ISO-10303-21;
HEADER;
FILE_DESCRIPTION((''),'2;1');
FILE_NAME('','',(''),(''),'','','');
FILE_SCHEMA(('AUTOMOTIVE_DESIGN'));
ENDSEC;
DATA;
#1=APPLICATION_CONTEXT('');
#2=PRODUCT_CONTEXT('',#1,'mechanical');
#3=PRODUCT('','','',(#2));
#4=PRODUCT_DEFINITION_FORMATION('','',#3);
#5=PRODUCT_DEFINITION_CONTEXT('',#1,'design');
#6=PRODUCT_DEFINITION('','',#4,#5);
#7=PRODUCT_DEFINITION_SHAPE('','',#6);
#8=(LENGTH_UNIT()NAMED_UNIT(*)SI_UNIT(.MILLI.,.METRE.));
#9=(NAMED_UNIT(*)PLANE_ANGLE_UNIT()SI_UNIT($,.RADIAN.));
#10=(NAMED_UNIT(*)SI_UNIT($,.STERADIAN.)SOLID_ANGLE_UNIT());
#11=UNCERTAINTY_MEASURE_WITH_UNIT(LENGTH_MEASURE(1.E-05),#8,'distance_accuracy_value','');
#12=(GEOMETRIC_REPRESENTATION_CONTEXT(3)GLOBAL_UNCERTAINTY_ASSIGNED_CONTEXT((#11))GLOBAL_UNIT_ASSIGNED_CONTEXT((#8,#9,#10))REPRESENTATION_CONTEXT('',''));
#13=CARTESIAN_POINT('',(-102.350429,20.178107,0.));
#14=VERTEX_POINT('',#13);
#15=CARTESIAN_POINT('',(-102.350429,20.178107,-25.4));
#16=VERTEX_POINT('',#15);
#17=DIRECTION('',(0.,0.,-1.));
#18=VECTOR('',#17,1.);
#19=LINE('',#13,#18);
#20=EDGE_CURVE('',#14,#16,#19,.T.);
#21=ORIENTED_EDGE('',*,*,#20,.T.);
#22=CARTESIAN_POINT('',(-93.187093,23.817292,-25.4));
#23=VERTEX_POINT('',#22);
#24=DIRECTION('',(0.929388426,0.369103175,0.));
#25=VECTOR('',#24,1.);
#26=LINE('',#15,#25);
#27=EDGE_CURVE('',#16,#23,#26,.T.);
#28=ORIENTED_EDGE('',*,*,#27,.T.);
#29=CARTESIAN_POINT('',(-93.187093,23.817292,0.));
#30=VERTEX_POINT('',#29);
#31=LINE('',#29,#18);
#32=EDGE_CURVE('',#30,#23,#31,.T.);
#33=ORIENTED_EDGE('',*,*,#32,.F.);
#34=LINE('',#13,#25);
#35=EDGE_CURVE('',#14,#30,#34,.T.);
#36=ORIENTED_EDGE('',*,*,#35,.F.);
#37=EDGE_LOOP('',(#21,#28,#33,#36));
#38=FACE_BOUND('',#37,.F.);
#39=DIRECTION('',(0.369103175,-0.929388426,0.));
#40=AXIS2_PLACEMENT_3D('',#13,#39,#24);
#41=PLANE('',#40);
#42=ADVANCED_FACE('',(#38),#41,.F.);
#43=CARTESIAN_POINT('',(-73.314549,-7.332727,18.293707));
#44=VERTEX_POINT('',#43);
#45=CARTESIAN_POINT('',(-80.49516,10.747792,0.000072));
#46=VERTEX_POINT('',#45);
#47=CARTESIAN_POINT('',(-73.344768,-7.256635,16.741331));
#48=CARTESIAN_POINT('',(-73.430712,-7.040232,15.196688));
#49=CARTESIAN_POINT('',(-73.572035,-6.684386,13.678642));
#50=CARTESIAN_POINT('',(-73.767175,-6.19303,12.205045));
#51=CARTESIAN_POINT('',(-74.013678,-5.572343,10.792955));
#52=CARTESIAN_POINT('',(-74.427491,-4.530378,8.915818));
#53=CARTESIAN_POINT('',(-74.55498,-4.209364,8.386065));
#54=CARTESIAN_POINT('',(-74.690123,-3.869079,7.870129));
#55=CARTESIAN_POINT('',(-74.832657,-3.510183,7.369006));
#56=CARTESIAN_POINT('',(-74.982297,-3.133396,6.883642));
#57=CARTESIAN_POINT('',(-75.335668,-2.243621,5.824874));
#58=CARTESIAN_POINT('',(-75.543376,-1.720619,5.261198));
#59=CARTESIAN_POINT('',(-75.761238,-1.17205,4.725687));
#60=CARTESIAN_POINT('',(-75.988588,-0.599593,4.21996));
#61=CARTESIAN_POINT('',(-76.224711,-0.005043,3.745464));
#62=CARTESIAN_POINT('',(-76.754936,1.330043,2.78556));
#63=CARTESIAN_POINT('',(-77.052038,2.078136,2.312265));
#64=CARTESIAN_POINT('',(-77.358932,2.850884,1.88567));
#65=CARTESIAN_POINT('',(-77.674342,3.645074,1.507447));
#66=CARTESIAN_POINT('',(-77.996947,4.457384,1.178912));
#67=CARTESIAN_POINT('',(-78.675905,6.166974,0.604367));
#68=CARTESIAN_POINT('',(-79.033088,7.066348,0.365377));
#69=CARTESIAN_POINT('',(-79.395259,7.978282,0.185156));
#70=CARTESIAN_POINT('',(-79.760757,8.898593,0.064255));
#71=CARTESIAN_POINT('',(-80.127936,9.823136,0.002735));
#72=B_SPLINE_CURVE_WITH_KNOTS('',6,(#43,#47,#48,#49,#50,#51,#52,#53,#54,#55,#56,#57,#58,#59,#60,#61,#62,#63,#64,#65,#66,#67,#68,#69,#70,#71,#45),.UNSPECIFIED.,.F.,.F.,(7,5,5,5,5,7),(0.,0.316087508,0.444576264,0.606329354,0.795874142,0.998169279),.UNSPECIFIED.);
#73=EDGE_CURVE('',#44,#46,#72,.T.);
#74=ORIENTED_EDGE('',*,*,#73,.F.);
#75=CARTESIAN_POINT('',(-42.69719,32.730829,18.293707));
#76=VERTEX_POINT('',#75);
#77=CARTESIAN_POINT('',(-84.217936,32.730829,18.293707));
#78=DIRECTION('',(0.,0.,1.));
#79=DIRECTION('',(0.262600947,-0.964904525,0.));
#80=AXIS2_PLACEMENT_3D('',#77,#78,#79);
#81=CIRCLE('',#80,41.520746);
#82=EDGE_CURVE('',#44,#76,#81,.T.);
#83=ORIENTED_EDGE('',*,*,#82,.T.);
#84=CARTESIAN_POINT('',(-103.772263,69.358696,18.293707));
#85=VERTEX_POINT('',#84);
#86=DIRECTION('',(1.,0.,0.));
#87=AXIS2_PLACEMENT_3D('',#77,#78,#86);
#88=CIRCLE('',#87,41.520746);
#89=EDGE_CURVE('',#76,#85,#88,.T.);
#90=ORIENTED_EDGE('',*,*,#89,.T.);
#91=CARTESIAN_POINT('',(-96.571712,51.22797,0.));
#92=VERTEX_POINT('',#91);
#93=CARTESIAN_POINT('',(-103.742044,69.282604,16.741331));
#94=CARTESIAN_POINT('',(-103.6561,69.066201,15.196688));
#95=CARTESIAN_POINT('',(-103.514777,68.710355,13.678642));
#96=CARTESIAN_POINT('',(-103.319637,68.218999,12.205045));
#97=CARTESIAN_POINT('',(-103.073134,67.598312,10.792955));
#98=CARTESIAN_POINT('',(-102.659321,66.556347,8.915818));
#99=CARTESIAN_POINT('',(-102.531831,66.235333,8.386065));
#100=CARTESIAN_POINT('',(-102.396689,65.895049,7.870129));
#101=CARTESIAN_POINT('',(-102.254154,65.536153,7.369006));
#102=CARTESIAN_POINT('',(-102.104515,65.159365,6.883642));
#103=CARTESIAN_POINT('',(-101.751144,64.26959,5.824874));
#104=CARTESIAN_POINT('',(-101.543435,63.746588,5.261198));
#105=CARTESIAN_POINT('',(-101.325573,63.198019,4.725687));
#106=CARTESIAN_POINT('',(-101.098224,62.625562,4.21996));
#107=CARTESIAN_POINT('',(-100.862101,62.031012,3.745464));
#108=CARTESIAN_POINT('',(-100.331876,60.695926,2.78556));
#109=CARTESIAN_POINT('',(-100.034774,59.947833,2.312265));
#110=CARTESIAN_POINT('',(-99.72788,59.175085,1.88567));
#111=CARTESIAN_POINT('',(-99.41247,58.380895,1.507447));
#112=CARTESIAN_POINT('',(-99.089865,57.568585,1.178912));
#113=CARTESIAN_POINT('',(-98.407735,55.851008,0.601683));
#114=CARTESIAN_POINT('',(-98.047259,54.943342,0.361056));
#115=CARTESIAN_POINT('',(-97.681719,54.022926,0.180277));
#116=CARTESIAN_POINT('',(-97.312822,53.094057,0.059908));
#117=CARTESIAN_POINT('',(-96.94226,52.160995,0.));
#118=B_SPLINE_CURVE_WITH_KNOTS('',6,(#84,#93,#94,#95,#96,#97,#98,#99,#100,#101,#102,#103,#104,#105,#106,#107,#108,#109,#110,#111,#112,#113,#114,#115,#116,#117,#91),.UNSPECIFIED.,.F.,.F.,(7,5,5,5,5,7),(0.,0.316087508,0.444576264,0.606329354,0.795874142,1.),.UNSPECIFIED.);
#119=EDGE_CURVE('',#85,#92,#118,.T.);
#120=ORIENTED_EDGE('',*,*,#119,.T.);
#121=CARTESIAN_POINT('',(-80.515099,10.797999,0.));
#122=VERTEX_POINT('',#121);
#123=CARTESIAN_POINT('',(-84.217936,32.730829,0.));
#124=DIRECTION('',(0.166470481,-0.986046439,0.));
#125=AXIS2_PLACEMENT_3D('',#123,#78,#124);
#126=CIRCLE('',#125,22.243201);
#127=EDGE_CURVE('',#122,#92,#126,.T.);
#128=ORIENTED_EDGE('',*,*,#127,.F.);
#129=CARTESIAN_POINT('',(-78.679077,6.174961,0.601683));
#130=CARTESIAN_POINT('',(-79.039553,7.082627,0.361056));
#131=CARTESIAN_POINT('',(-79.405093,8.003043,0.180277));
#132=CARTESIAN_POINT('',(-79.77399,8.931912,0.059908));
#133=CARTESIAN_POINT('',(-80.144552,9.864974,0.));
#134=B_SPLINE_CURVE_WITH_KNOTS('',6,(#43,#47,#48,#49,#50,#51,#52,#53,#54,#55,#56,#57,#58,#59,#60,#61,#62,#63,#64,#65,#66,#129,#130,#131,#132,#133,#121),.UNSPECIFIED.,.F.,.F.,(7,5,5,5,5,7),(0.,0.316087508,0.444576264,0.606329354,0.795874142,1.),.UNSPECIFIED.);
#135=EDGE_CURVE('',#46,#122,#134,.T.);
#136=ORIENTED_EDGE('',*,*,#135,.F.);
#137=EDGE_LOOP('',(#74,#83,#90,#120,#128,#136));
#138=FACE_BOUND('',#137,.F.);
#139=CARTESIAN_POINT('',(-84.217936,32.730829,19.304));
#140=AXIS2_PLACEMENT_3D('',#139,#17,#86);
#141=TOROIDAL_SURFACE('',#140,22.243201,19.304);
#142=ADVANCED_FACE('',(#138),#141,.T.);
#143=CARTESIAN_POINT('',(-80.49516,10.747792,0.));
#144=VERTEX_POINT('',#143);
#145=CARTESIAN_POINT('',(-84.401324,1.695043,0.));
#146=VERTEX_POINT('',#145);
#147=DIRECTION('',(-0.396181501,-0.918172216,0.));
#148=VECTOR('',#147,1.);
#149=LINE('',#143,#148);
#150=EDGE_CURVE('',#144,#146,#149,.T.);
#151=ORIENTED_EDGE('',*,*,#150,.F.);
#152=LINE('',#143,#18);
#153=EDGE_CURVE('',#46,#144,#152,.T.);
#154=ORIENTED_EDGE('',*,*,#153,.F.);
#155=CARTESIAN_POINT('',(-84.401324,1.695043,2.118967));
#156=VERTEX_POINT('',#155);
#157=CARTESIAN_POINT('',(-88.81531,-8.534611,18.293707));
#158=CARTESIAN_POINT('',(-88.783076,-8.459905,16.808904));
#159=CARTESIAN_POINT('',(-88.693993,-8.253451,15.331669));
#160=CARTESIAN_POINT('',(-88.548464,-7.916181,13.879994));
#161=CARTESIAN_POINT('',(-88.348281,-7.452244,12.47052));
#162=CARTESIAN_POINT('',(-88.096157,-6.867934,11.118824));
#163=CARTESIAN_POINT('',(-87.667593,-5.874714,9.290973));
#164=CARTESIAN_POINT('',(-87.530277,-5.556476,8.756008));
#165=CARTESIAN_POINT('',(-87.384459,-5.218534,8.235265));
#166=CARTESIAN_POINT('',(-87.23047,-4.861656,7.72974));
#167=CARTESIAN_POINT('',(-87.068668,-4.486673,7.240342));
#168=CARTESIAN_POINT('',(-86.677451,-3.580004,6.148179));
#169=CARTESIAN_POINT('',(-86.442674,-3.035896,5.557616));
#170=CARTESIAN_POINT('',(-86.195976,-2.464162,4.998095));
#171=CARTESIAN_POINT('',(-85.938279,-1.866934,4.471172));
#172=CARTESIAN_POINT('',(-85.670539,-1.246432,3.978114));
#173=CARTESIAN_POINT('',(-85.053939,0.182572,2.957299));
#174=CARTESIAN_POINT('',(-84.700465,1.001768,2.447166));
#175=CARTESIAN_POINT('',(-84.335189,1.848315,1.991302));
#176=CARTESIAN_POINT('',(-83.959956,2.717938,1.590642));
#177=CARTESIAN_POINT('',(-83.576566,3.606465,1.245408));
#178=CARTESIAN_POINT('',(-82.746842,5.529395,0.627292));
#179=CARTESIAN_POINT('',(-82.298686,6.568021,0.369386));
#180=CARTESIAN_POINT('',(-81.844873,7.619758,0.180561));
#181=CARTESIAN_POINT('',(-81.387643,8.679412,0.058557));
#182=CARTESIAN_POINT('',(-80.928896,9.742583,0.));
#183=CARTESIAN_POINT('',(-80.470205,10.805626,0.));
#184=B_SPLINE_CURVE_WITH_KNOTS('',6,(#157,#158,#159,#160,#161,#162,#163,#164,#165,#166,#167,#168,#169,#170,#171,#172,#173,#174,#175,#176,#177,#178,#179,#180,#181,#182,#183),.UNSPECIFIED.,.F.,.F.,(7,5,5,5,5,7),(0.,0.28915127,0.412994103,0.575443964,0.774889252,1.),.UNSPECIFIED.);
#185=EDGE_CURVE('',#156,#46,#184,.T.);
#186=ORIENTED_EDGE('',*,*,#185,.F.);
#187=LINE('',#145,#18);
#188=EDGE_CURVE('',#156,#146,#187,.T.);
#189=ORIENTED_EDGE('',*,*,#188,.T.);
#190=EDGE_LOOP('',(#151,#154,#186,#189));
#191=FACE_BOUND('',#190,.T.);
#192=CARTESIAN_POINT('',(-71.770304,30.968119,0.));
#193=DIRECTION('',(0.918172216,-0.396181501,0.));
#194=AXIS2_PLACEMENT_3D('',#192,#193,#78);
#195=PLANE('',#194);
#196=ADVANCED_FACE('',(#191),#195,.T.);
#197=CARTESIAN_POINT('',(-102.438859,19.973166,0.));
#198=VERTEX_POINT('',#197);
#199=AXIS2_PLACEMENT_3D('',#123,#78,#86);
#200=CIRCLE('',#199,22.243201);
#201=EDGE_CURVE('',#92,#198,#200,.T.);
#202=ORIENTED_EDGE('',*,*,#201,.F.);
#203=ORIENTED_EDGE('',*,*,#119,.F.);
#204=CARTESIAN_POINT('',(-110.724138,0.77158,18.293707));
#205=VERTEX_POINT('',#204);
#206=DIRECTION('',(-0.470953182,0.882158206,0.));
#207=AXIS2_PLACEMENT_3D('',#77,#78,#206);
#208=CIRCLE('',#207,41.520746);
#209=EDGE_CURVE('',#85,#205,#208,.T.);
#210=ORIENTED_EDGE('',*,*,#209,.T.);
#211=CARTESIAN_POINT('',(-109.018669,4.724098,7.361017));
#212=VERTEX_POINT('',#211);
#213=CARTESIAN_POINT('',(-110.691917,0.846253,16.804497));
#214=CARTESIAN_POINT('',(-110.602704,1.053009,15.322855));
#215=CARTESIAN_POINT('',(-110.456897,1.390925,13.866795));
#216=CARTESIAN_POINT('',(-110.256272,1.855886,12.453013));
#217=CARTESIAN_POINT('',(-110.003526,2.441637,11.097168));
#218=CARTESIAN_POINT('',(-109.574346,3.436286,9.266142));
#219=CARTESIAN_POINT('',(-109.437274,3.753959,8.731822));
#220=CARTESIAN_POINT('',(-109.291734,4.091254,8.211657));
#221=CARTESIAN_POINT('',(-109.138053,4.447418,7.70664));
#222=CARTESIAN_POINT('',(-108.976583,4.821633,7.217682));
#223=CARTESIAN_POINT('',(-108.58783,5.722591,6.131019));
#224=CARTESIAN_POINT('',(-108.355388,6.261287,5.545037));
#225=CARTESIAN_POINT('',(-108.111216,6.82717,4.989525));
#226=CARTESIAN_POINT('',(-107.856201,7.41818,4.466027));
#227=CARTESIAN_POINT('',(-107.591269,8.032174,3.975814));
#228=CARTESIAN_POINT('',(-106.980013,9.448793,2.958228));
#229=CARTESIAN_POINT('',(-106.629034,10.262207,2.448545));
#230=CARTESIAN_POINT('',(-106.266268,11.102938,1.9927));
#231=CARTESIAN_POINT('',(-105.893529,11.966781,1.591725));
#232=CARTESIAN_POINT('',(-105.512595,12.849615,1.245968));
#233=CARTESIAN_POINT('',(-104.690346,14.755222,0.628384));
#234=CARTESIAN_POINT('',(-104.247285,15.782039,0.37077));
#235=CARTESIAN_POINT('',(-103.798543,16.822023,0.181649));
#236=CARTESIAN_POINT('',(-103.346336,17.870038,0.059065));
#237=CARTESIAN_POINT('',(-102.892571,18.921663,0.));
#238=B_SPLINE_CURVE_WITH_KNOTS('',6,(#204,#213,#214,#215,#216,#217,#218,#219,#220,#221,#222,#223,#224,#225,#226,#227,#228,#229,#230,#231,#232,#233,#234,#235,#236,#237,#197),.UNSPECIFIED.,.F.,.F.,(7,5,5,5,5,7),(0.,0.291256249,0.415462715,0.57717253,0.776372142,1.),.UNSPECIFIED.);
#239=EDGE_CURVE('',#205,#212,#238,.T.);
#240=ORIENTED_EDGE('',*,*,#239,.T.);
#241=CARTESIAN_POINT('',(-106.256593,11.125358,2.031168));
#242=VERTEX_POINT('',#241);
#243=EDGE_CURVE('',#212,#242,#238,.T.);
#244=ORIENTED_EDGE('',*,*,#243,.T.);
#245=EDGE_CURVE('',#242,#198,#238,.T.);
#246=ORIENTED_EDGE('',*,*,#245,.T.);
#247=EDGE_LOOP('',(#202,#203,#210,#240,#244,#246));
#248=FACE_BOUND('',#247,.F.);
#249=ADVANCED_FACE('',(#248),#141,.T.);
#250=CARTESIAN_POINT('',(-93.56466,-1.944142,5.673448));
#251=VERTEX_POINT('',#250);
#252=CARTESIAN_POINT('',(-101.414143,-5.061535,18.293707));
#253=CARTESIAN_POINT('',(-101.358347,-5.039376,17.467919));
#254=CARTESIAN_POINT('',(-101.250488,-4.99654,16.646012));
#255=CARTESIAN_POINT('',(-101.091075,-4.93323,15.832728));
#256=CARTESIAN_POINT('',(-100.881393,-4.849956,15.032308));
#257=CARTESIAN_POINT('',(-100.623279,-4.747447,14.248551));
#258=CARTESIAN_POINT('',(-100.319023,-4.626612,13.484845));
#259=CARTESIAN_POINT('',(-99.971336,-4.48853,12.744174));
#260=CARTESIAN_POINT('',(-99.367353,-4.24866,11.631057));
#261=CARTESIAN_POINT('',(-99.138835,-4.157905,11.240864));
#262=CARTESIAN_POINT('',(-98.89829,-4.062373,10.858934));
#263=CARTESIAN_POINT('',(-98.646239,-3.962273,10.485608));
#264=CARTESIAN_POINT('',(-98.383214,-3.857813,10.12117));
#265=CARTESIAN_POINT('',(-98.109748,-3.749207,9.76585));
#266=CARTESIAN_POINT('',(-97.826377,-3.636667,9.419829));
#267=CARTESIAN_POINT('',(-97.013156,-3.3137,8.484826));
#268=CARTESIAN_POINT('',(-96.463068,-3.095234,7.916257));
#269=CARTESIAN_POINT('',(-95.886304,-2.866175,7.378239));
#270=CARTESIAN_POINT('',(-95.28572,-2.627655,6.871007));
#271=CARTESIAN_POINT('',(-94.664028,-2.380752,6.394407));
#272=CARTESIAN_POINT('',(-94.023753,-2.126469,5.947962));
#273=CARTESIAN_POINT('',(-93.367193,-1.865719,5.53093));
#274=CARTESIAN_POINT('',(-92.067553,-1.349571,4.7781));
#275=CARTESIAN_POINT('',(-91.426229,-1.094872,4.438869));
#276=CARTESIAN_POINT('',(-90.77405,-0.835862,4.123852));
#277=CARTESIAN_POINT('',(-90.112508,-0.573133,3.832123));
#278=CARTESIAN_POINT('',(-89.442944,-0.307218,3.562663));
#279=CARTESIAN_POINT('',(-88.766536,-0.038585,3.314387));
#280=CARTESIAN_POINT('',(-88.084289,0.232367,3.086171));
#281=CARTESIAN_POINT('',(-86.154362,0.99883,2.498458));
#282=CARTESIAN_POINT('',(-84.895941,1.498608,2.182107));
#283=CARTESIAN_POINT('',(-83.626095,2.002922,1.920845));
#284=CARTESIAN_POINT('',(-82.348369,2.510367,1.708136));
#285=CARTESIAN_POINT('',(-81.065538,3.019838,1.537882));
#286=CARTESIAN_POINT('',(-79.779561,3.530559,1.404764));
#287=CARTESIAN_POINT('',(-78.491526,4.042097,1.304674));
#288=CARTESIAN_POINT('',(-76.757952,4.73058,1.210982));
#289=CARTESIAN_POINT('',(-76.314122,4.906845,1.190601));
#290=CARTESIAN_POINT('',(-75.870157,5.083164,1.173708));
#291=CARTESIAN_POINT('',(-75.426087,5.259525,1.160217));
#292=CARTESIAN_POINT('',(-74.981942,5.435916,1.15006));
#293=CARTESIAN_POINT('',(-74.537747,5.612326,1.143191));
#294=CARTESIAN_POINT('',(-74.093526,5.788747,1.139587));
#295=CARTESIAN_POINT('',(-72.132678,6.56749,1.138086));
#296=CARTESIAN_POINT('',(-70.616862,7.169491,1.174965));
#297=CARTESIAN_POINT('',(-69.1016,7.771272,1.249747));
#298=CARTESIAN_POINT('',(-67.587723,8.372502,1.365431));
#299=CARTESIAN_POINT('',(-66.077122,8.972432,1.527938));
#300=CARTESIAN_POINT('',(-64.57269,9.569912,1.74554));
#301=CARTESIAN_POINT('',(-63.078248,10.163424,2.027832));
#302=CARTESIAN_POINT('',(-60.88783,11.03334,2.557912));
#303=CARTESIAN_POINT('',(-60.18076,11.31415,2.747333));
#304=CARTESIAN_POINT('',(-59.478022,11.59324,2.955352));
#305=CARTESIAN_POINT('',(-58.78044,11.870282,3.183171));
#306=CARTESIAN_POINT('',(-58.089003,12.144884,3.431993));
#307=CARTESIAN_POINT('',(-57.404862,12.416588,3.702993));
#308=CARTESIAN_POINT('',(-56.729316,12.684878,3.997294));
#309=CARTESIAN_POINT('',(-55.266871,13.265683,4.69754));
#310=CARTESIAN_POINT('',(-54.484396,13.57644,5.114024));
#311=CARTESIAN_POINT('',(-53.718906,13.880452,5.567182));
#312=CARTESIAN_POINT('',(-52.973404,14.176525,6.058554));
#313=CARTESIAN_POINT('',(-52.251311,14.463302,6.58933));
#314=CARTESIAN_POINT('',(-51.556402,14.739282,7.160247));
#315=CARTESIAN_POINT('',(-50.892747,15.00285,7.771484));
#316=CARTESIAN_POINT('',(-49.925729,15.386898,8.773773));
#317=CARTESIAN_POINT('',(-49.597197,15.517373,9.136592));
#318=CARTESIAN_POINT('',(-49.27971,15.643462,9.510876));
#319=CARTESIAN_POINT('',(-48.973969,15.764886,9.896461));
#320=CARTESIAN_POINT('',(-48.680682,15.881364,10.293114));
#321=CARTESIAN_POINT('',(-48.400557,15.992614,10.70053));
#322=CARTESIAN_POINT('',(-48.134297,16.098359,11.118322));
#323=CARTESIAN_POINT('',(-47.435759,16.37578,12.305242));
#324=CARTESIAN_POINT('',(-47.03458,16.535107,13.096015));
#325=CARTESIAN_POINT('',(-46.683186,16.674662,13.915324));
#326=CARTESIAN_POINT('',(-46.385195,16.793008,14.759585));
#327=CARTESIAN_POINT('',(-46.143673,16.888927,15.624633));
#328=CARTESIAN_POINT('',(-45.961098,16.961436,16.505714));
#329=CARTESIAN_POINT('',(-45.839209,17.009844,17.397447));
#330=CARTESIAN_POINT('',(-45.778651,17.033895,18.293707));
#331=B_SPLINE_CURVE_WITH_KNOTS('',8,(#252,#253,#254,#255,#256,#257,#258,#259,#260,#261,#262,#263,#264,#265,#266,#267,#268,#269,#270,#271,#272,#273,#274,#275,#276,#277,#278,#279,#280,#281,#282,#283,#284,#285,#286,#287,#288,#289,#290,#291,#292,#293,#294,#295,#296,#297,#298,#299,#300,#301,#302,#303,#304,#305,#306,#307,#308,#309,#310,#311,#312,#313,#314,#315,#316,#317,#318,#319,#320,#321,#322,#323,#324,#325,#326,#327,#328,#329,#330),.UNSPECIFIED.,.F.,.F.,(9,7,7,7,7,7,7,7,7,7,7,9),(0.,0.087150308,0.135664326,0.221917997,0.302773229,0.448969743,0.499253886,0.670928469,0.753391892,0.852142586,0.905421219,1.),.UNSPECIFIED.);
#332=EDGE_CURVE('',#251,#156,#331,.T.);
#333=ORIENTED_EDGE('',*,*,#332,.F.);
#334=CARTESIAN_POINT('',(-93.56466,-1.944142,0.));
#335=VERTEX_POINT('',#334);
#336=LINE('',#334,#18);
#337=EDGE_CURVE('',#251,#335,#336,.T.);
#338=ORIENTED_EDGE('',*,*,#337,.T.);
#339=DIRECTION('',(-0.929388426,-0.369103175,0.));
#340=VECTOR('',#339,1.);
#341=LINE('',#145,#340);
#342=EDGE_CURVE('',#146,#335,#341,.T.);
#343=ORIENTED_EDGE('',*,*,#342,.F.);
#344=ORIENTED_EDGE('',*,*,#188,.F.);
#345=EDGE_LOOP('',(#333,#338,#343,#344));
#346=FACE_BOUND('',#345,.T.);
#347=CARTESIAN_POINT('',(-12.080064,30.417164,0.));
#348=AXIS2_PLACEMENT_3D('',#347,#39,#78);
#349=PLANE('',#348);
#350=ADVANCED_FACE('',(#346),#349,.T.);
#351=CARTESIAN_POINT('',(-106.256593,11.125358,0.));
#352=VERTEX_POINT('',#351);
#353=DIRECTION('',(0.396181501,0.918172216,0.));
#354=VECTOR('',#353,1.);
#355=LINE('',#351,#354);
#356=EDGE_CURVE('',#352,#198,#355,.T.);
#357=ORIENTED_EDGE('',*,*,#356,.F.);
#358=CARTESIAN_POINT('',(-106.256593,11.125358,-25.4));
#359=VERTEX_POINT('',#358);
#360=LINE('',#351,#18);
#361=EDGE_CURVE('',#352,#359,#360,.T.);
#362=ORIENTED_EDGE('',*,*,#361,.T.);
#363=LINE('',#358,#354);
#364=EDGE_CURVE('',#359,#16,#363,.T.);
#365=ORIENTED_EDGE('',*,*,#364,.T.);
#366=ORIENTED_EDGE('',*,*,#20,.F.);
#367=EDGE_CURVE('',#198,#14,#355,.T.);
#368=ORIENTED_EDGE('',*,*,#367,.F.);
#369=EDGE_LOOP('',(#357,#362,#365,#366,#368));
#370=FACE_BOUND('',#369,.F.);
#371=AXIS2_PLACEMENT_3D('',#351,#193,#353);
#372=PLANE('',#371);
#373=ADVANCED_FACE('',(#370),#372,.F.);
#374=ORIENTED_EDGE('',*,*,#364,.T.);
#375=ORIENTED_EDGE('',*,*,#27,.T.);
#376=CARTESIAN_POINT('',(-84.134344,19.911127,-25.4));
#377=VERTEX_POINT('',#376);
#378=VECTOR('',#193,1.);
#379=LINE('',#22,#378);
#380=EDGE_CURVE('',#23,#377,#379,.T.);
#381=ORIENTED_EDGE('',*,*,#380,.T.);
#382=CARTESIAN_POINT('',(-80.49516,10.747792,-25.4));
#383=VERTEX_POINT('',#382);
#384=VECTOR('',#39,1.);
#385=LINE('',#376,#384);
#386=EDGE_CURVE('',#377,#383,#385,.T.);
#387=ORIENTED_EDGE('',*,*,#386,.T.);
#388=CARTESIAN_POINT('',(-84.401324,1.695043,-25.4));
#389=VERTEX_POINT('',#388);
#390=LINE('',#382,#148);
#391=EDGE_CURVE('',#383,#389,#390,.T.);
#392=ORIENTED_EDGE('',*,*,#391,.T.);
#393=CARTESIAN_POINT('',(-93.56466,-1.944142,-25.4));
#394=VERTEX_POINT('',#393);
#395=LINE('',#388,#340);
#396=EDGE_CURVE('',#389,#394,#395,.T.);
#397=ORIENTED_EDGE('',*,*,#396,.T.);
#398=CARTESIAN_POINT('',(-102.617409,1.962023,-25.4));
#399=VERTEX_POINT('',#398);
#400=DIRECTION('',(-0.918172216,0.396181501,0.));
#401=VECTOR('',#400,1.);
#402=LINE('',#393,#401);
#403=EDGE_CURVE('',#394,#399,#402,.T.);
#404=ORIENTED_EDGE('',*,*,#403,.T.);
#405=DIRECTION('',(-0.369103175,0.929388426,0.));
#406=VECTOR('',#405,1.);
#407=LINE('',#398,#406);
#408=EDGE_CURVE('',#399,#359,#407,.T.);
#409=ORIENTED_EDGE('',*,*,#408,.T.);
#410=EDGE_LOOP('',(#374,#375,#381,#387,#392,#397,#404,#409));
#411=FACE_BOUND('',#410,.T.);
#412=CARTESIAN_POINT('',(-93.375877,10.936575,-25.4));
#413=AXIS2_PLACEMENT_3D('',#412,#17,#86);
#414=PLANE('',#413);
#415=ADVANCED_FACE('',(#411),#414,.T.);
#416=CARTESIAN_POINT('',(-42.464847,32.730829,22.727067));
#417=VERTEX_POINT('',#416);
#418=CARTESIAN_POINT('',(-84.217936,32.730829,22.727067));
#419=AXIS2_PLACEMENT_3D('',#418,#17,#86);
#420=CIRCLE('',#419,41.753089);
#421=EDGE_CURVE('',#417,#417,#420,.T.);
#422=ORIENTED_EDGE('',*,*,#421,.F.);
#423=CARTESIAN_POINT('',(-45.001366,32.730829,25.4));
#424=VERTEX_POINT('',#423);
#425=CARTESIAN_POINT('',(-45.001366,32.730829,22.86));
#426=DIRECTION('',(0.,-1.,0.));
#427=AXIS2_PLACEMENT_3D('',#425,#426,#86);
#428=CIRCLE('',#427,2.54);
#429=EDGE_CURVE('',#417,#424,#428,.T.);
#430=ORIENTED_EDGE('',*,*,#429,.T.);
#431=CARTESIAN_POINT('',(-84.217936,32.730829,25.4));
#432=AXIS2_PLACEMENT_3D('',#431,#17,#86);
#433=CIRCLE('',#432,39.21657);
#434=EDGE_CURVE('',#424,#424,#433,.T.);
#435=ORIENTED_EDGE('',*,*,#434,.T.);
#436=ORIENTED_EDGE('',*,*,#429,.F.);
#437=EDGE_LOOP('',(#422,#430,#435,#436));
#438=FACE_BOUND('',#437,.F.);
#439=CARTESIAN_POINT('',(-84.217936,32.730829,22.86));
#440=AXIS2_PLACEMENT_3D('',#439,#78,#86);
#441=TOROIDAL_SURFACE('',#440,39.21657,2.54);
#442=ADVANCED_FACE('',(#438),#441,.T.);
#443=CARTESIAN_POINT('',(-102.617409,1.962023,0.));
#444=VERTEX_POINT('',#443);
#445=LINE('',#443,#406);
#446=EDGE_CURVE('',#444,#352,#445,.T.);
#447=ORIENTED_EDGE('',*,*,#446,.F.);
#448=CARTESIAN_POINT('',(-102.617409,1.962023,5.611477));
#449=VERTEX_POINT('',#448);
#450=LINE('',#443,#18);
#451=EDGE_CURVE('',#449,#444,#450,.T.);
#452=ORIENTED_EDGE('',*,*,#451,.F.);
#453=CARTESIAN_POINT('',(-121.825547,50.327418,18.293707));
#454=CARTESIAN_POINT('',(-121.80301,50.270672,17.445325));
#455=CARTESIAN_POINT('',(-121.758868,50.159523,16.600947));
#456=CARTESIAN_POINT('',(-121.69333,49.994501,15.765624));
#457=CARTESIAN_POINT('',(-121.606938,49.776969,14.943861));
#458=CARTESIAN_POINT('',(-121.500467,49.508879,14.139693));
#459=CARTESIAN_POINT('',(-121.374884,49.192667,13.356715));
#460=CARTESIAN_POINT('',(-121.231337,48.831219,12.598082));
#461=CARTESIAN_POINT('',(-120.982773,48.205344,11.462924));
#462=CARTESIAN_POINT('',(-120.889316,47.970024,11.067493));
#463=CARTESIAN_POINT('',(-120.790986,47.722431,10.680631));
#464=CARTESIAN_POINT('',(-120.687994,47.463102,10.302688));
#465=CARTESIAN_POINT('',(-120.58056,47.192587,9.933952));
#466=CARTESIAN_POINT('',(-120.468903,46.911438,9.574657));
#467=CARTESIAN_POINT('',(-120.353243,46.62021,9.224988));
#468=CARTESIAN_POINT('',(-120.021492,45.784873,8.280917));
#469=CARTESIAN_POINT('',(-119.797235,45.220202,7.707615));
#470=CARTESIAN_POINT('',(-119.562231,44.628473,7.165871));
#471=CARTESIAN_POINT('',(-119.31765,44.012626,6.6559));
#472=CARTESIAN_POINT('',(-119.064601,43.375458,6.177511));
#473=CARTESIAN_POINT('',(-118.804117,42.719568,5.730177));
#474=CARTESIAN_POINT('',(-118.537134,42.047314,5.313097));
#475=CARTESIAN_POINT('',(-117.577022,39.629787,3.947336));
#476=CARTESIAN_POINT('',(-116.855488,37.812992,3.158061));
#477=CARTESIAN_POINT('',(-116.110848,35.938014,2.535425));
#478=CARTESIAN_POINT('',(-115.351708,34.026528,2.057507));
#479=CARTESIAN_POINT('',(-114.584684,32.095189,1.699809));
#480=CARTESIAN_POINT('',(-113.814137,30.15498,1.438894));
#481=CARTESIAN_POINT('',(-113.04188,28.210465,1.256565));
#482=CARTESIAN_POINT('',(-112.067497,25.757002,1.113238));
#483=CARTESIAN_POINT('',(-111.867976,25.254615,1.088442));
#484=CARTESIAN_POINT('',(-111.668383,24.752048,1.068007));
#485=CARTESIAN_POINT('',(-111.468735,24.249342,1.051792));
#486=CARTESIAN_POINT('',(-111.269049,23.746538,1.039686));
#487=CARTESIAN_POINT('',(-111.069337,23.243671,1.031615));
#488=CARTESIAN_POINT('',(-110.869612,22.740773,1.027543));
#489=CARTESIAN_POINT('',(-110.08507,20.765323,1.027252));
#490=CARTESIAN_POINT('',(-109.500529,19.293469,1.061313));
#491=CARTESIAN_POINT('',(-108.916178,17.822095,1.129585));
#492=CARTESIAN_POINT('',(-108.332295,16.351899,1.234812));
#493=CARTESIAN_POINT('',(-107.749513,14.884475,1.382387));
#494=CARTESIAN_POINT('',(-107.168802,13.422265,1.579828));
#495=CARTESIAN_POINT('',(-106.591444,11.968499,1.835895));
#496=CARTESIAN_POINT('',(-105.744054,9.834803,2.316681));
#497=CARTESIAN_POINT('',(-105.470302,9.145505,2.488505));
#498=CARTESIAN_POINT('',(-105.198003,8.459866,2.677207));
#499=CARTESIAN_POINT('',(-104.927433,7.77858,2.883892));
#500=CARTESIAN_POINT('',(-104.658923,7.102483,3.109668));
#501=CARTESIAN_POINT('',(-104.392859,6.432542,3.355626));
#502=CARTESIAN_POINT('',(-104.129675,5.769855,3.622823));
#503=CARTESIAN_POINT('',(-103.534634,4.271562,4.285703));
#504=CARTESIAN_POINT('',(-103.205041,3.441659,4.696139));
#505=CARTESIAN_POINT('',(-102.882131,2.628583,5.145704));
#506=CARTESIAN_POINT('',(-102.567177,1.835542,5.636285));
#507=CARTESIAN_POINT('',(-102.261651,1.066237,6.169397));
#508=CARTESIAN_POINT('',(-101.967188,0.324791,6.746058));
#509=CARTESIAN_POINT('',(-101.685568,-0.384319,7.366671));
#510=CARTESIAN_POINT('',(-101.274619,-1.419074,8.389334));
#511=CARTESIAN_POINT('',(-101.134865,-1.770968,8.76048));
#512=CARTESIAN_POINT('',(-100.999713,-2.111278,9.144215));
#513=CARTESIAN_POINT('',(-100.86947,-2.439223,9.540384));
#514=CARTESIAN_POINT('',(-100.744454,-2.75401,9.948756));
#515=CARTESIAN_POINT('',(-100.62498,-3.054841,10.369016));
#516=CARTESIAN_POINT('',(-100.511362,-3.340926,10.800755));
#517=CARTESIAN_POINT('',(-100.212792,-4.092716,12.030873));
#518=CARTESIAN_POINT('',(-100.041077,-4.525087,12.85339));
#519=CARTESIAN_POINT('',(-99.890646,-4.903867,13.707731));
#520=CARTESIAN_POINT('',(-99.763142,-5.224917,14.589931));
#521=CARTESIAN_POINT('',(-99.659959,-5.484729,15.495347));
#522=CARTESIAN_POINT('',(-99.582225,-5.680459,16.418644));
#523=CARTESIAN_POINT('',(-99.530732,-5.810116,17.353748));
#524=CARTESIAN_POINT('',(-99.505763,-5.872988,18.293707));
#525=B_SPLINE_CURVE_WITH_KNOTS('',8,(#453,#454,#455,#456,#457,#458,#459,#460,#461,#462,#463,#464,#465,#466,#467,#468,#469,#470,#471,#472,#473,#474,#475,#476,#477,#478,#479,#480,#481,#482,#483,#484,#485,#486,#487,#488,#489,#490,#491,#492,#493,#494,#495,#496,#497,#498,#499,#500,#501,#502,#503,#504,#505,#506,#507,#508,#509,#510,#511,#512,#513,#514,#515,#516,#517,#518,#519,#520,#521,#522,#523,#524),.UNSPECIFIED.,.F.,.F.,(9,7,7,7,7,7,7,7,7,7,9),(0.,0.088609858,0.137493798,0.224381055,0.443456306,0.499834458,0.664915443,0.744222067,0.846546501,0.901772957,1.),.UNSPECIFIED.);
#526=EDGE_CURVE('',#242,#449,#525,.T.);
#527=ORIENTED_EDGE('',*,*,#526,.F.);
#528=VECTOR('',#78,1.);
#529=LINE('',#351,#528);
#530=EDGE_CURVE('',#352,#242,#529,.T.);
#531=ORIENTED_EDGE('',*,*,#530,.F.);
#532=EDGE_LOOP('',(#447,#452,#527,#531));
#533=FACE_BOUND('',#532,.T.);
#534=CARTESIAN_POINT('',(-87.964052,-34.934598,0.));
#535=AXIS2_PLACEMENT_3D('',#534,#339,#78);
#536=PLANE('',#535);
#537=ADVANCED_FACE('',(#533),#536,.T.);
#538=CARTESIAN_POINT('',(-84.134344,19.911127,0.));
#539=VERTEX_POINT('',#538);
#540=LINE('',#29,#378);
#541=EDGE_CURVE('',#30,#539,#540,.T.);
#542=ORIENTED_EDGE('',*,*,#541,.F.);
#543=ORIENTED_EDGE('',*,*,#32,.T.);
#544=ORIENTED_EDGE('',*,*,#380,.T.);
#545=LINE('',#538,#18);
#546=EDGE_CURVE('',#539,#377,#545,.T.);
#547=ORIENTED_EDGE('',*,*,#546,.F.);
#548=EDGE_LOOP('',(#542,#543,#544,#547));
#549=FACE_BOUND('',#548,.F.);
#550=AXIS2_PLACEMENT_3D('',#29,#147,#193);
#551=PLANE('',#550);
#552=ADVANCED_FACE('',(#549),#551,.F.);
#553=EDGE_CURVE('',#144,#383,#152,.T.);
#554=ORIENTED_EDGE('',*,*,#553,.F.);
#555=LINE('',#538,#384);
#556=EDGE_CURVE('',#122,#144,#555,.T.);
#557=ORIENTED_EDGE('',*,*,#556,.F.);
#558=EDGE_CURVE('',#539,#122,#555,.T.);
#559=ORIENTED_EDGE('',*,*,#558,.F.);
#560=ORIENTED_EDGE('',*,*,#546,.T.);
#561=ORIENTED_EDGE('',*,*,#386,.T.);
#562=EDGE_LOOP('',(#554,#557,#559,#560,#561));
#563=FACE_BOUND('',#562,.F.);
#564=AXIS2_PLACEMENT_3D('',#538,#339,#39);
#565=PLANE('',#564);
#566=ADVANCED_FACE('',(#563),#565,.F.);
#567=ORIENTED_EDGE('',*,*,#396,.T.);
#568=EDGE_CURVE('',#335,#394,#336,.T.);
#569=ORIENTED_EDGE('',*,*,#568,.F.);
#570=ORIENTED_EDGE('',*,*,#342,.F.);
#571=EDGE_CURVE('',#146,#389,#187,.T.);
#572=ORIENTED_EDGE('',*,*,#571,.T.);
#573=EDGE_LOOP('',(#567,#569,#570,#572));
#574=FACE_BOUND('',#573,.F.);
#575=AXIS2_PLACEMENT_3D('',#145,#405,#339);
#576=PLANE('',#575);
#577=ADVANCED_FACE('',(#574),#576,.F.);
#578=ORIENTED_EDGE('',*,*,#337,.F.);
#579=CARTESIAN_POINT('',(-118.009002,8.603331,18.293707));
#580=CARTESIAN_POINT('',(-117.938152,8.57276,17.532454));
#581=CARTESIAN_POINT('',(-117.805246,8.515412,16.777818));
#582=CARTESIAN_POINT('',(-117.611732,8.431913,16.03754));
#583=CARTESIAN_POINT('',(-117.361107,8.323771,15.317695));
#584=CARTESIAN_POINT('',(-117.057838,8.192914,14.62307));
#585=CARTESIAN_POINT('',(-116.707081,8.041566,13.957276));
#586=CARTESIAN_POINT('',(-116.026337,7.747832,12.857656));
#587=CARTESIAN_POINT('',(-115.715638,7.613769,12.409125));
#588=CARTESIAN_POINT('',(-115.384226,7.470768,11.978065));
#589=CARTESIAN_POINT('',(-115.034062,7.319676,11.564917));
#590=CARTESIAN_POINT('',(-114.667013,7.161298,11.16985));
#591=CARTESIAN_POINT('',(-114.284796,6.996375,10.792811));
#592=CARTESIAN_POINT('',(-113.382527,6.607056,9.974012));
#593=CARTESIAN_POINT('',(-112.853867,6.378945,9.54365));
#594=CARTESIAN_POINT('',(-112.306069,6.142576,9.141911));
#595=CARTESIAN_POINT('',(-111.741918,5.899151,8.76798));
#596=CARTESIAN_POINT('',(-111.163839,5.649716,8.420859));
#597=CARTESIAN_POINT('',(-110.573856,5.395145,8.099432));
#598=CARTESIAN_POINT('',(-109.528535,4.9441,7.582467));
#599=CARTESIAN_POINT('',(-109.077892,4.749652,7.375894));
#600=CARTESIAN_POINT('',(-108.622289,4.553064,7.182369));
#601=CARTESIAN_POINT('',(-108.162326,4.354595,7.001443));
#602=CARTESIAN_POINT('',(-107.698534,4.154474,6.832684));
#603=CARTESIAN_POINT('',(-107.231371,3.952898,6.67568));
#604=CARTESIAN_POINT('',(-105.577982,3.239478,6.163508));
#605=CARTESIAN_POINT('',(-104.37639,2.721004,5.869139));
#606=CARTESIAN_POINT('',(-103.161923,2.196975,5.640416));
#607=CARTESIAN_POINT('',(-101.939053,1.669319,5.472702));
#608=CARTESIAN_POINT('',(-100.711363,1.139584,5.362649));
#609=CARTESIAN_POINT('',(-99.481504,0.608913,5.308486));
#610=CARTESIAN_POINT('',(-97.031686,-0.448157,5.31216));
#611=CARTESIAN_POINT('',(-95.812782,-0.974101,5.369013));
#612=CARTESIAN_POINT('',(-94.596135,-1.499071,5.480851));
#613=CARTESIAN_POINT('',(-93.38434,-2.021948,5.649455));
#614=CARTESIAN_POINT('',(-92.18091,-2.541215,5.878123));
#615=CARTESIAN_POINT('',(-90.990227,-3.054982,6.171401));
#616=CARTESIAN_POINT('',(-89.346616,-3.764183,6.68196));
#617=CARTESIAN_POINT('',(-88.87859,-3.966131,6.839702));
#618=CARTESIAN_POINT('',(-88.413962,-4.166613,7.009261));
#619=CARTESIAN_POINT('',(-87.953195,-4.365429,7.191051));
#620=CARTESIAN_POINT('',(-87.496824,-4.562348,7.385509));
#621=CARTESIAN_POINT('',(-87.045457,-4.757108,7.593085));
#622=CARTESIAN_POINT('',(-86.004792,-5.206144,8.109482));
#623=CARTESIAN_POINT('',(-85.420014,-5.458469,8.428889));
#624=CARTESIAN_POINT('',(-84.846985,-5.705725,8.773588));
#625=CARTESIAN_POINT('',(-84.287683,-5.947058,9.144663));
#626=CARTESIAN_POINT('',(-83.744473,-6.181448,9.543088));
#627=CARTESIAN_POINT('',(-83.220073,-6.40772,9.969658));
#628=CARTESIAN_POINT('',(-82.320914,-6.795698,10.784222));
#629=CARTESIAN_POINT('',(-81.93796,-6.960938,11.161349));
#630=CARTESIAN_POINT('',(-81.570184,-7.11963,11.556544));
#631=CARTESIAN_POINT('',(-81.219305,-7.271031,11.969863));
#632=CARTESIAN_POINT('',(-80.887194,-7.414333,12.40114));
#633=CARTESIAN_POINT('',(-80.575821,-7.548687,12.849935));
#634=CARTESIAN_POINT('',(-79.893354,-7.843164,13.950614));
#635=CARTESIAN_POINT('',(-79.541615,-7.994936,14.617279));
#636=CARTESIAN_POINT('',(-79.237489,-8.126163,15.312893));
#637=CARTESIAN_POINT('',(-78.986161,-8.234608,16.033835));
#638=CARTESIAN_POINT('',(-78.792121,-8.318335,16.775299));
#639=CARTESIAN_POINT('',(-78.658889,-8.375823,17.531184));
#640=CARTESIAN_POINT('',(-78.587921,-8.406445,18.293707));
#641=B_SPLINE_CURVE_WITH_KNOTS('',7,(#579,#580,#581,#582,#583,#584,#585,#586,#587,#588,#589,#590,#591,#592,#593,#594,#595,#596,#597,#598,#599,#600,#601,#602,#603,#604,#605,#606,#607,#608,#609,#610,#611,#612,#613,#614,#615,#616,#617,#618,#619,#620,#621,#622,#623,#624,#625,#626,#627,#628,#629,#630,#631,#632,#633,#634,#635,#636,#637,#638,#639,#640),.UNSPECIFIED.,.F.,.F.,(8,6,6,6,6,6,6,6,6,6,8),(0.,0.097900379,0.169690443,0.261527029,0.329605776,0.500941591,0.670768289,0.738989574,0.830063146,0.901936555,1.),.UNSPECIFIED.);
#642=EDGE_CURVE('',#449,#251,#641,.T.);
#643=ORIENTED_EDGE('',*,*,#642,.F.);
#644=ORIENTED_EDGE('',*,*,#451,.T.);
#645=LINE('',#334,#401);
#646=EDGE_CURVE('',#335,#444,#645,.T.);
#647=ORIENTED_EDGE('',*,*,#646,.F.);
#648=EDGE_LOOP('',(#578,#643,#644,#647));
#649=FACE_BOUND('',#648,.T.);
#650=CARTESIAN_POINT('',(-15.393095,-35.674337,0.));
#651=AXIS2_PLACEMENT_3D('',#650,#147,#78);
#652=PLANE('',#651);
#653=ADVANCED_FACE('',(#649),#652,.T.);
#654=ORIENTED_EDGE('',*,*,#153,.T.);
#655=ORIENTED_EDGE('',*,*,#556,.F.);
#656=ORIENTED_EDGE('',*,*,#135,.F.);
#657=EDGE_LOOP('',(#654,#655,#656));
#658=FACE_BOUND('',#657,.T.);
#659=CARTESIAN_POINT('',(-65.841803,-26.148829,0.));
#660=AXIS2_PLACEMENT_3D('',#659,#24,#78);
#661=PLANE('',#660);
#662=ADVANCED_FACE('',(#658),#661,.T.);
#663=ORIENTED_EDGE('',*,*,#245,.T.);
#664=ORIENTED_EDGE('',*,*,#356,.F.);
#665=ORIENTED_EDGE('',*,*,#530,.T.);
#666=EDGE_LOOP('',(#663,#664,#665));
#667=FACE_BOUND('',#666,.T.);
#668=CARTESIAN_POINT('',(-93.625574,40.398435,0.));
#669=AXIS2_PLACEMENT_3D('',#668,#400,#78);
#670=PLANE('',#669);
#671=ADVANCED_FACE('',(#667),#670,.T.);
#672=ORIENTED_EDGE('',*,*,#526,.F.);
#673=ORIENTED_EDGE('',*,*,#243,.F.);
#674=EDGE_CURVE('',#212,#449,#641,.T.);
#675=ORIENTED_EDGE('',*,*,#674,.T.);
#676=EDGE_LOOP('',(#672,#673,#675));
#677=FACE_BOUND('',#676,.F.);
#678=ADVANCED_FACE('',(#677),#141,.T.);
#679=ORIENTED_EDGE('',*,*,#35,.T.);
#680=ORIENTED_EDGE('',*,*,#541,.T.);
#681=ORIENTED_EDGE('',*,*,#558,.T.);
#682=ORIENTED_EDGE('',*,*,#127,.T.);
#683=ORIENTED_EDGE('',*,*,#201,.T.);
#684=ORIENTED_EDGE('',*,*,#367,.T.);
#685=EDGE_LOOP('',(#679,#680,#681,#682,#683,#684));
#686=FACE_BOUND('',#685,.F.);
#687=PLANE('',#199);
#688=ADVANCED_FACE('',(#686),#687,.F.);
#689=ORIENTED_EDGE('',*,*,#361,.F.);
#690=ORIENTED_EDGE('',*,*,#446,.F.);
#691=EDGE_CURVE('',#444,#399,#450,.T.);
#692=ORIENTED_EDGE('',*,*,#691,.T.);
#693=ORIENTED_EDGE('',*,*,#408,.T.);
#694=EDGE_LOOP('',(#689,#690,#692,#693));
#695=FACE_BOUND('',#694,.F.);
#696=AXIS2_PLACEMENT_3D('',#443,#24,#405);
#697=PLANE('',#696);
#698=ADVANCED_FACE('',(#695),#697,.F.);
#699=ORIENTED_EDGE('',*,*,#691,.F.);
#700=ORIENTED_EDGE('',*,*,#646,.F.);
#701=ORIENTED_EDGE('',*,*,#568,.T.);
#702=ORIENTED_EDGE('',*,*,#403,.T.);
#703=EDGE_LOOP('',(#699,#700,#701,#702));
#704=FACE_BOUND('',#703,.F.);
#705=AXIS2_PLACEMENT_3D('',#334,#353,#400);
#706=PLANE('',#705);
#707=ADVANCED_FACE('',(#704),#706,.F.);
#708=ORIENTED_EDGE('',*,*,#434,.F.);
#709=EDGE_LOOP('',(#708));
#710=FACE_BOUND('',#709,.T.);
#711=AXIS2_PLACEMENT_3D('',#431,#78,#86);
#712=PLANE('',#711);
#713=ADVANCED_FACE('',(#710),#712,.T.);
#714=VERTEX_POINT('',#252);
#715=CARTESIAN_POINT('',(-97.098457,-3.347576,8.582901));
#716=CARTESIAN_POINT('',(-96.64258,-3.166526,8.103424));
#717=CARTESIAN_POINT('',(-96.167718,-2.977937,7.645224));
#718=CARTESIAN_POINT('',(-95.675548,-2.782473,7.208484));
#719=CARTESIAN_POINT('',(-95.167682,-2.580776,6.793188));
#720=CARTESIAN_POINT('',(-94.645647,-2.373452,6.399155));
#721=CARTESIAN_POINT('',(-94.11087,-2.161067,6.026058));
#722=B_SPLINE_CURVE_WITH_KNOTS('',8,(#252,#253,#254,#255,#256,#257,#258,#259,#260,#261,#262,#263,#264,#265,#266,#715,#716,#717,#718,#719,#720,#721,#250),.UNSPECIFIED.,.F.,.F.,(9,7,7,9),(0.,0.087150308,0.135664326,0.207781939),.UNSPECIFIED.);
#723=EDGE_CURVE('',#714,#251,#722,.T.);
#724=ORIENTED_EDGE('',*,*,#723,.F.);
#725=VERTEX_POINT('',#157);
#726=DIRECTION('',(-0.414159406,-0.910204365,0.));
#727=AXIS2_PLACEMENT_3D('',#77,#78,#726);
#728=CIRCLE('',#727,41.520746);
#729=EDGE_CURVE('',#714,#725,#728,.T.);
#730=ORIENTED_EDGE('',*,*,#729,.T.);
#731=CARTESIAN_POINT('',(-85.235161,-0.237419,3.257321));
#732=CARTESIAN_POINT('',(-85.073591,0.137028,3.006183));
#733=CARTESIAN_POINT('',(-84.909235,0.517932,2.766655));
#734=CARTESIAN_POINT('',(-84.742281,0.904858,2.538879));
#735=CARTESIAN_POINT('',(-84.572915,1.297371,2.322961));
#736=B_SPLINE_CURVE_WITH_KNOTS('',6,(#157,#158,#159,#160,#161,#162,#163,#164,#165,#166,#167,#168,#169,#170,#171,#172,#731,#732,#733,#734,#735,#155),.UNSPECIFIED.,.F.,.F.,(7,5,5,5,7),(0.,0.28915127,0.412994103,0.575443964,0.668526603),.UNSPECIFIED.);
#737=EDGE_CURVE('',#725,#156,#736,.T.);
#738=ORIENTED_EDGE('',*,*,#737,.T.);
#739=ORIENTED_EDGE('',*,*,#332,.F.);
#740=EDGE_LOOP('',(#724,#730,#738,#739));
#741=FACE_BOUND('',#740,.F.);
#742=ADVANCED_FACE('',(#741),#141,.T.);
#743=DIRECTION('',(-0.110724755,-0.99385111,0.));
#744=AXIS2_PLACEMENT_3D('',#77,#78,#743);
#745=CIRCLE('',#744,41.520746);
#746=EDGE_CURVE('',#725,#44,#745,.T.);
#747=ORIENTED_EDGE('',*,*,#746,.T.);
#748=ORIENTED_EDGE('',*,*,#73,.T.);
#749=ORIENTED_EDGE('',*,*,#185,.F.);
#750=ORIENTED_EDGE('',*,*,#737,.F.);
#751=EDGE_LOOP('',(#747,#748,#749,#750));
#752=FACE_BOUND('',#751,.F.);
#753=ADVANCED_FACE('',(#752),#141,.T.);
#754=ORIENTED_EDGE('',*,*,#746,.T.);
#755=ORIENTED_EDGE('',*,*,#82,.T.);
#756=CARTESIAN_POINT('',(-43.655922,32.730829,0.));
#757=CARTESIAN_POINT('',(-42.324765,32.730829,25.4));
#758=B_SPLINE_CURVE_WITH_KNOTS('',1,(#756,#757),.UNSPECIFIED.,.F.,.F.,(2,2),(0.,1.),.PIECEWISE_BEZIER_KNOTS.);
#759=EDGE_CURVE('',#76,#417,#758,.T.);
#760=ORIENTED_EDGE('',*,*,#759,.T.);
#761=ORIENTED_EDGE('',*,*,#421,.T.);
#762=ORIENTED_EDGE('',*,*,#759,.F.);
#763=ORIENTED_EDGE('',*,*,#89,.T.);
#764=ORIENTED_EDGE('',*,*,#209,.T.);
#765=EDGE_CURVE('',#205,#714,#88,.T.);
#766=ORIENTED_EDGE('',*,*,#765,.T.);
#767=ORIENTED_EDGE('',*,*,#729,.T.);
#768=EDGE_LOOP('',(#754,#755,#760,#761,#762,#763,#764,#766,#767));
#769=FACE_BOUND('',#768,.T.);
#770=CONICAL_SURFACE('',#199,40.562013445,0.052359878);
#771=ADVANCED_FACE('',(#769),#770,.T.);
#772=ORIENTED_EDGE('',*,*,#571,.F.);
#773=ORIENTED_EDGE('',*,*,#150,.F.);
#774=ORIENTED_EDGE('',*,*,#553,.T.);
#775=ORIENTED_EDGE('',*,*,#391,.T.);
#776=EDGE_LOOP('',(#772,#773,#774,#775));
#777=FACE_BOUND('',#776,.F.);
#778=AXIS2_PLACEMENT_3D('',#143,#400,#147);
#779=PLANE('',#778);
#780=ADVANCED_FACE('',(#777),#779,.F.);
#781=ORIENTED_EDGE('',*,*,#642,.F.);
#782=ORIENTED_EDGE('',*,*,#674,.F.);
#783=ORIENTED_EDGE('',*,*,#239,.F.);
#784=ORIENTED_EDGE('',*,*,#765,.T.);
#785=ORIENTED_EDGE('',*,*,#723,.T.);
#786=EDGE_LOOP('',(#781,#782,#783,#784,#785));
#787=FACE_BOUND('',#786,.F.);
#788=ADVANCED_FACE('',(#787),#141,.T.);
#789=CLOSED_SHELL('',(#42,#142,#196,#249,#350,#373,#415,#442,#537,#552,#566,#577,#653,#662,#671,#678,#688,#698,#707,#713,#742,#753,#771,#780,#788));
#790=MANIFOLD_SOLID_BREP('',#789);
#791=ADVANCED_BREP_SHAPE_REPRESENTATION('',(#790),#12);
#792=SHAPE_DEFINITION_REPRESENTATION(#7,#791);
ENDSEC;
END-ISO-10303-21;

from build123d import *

# Parameters (mm, degrees)
F0_R     = 40.5620134448
F1_DEPTH = 25.4
F1_TAPER = -3
F2_R     = 2.54
F4_DEPTH = 25.4


# Not quite as in the source:
# - a fillet or chamfer that OpenCascade refuses, or shapes differently, is made with other operations: its cross-section is extruded or revolved along the edge and cut away or added


with BuildPart() as f1:
    # F0 (on Top) → F1 (new body)
    with BuildSketch(Plane.XY):
        with Locations((-84.2179358006, 32.7308289707)):
            Circle(F0_R)
    extrude(amount=F1_DEPTH, taper=F1_TAPER)

    # F2
    f2_edges = [f1.edges().sort_by_distance(p)[0] for p in [
        (-126.111107, 32.730829, 25.4),
    ]]
    fillet(f2_edges, radius=F2_R)

    # F3 (on face) → F4 (join)
    with BuildSketch(Plane(origin=(0, 0, 0), x_dir=(1, 0, 0), z_dir=(0, 0, -1))):
        Polygon((-84.1343444512, -19.9111274666), (-80.4951596333, -10.7477918976), (-84.4013240897, -1.6950429158), (-93.5646596587, 1.9441419021), (-102.6174086406, -1.9620225542), (-106.2565934585, -11.1253581232), (-102.3504290021, -20.1781071051), (-93.1870934331, -23.817291923), align=None)
    extrude(amount=F4_DEPTH)

    # F5: fillet of radius 19.304 on 1 edges, made by hand


with BuildPart() as f5_tool1:
    # F5_s2 → F5_t3 (revolve)
    with BuildSketch(Plane.XZ.offset(-32.7308289707)):
        with BuildLine():
            ThreePointArc((-42.6971898128, 18.2937067007), (-48.6867376225, 5.301373142), (-61.9747343517, 0))
            Line((-61.9747343517, 0), (-43.6559223558, 0))
            Line((-43.6559223558, 0), (-42.6971898128, 18.2937067007))
        make_face()
    revolve(axis=Axis((-84.2179358006, 32.7308289707, 0), (0, 0, 1)))

    split(bisect_by=Plane(origin=(-65.841803323, -26.1488285825, 0), x_dir=(0, 0, 1), z_dir=(0.929388426, 0.3691031748, 0)), keep=Keep.TOP)


with BuildPart() as f5_tool5:
    # F5_s6 → F5_t7 (revolve)
    with BuildSketch(Plane.XZ.offset(-32.7308289707)):
        with BuildLine():
            ThreePointArc((-42.6971898128, 18.2937067007), (-48.6867376225, 5.301373142), (-61.9747343517, 0))
            Line((-61.9747343517, 0), (-43.6559223558, 0))
            Line((-43.6559223558, 0), (-42.6971898128, 18.2937067007))
        make_face()
    revolve(axis=Axis((-84.2179358006, 32.7308289707, 0), (0, 0, 1)))

    split(bisect_by=Plane(origin=(-71.7703043479, 30.9681194552, 0), x_dir=(0, 0, 1), z_dir=(0.9181722162, -0.3961815006, 0)), keep=Keep.TOP)


with BuildPart() as f5_tool9:
    # F5_s10 → F5_t11 (revolve)
    with BuildSketch(Plane.XZ.offset(-32.7308289707)):
        with BuildLine():
            ThreePointArc((-42.6971898128, 18.2937067007), (-48.6867376225, 5.301373142), (-61.9747343517, 0))
            Line((-61.9747343517, 0), (-43.6559223558, 0))
            Line((-43.6559223558, 0), (-42.6971898128, 18.2937067007))
        make_face()
    revolve(axis=Axis((-84.2179358006, 32.7308289707, 0), (0, 0, 1)))

    split(bisect_by=Plane(origin=(-93.6255737167, 40.3984346626, 0), x_dir=(0, 0, 1), z_dir=(-0.9181722162, 0.3961815006, 0)), keep=Keep.TOP)


with BuildPart() as f5_tool13:
    # F5_s14 → F5_t15 (revolve)
    with BuildSketch(Plane.XZ.offset(-32.7308289707)):
        with BuildLine():
            ThreePointArc((-42.6971898128, 18.2937067007), (-48.6867376225, 5.301373142), (-61.9747343517, 0))
            Line((-61.9747343517, 0), (-43.6559223558, 0))
            Line((-43.6559223558, 0), (-42.6971898128, 18.2937067007))
        make_face()
    revolve(axis=Axis((-84.2179358006, 32.7308289707, 0), (0, 0, 1)))

    split(bisect_by=Plane(origin=(-12.0800640476, 30.4171637609, 0), x_dir=(0, 0, 1), z_dir=(0.3691031748, -0.929388426, 0)), keep=Keep.TOP)


with BuildPart() as f5_tool17:
    # F5_s18 → F5_t19 (revolve)
    with BuildSketch(Plane.XZ.offset(-32.7308289707)):
        with BuildLine():
            ThreePointArc((-42.6971898128, 18.2937067007), (-48.6867376225, 5.301373142), (-61.9747343517, 0))
            Line((-61.9747343517, 0), (-43.6559223558, 0))
            Line((-43.6559223558, 0), (-42.6971898128, 18.2937067007))
        make_face()
    revolve(axis=Axis((-84.2179358006, 32.7308289707, 0), (0, 0, 1)))

    split(bisect_by=Plane(origin=(-15.3930951173, -35.6743367329, 0), x_dir=(0, 0, 1), z_dir=(-0.3961815006, -0.9181722162, 0)), keep=Keep.TOP)


with BuildPart() as f5_tool21:
    # F5_s22 → F5_t23 (revolve)
    with BuildSketch(Plane.XZ.offset(-32.7308289707)):
        with BuildLine():
            ThreePointArc((-42.6971898128, 18.2937067007), (-48.6867376225, 5.301373142), (-61.9747343517, 0))
            Line((-61.9747343517, 0), (-43.6559223558, 0))
            Line((-43.6559223558, 0), (-42.6971898128, 18.2937067007))
        make_face()
    revolve(axis=Axis((-84.2179358006, 32.7308289707, 0), (0, 0, 1)))

    split(bisect_by=Plane(origin=(-87.9640523303, -34.9345979258, 0), x_dir=(0, 0, 1), z_dir=(-0.929388426, -0.3691031748, 0)), keep=Keep.TOP)


with BuildPart() as f1_1:
    add(f1.part)

    # F5_t25: cut F5_tool1, F5_tool5, F5_tool9, F5_tool13, F5_tool17, F5_tool21
    add([f5_tool1.part, f5_tool5.part, f5_tool9.part, f5_tool13.part, f5_tool17.part, f5_tool21.part], mode=Mode.SUBTRACT)


solid = f1_1.part
